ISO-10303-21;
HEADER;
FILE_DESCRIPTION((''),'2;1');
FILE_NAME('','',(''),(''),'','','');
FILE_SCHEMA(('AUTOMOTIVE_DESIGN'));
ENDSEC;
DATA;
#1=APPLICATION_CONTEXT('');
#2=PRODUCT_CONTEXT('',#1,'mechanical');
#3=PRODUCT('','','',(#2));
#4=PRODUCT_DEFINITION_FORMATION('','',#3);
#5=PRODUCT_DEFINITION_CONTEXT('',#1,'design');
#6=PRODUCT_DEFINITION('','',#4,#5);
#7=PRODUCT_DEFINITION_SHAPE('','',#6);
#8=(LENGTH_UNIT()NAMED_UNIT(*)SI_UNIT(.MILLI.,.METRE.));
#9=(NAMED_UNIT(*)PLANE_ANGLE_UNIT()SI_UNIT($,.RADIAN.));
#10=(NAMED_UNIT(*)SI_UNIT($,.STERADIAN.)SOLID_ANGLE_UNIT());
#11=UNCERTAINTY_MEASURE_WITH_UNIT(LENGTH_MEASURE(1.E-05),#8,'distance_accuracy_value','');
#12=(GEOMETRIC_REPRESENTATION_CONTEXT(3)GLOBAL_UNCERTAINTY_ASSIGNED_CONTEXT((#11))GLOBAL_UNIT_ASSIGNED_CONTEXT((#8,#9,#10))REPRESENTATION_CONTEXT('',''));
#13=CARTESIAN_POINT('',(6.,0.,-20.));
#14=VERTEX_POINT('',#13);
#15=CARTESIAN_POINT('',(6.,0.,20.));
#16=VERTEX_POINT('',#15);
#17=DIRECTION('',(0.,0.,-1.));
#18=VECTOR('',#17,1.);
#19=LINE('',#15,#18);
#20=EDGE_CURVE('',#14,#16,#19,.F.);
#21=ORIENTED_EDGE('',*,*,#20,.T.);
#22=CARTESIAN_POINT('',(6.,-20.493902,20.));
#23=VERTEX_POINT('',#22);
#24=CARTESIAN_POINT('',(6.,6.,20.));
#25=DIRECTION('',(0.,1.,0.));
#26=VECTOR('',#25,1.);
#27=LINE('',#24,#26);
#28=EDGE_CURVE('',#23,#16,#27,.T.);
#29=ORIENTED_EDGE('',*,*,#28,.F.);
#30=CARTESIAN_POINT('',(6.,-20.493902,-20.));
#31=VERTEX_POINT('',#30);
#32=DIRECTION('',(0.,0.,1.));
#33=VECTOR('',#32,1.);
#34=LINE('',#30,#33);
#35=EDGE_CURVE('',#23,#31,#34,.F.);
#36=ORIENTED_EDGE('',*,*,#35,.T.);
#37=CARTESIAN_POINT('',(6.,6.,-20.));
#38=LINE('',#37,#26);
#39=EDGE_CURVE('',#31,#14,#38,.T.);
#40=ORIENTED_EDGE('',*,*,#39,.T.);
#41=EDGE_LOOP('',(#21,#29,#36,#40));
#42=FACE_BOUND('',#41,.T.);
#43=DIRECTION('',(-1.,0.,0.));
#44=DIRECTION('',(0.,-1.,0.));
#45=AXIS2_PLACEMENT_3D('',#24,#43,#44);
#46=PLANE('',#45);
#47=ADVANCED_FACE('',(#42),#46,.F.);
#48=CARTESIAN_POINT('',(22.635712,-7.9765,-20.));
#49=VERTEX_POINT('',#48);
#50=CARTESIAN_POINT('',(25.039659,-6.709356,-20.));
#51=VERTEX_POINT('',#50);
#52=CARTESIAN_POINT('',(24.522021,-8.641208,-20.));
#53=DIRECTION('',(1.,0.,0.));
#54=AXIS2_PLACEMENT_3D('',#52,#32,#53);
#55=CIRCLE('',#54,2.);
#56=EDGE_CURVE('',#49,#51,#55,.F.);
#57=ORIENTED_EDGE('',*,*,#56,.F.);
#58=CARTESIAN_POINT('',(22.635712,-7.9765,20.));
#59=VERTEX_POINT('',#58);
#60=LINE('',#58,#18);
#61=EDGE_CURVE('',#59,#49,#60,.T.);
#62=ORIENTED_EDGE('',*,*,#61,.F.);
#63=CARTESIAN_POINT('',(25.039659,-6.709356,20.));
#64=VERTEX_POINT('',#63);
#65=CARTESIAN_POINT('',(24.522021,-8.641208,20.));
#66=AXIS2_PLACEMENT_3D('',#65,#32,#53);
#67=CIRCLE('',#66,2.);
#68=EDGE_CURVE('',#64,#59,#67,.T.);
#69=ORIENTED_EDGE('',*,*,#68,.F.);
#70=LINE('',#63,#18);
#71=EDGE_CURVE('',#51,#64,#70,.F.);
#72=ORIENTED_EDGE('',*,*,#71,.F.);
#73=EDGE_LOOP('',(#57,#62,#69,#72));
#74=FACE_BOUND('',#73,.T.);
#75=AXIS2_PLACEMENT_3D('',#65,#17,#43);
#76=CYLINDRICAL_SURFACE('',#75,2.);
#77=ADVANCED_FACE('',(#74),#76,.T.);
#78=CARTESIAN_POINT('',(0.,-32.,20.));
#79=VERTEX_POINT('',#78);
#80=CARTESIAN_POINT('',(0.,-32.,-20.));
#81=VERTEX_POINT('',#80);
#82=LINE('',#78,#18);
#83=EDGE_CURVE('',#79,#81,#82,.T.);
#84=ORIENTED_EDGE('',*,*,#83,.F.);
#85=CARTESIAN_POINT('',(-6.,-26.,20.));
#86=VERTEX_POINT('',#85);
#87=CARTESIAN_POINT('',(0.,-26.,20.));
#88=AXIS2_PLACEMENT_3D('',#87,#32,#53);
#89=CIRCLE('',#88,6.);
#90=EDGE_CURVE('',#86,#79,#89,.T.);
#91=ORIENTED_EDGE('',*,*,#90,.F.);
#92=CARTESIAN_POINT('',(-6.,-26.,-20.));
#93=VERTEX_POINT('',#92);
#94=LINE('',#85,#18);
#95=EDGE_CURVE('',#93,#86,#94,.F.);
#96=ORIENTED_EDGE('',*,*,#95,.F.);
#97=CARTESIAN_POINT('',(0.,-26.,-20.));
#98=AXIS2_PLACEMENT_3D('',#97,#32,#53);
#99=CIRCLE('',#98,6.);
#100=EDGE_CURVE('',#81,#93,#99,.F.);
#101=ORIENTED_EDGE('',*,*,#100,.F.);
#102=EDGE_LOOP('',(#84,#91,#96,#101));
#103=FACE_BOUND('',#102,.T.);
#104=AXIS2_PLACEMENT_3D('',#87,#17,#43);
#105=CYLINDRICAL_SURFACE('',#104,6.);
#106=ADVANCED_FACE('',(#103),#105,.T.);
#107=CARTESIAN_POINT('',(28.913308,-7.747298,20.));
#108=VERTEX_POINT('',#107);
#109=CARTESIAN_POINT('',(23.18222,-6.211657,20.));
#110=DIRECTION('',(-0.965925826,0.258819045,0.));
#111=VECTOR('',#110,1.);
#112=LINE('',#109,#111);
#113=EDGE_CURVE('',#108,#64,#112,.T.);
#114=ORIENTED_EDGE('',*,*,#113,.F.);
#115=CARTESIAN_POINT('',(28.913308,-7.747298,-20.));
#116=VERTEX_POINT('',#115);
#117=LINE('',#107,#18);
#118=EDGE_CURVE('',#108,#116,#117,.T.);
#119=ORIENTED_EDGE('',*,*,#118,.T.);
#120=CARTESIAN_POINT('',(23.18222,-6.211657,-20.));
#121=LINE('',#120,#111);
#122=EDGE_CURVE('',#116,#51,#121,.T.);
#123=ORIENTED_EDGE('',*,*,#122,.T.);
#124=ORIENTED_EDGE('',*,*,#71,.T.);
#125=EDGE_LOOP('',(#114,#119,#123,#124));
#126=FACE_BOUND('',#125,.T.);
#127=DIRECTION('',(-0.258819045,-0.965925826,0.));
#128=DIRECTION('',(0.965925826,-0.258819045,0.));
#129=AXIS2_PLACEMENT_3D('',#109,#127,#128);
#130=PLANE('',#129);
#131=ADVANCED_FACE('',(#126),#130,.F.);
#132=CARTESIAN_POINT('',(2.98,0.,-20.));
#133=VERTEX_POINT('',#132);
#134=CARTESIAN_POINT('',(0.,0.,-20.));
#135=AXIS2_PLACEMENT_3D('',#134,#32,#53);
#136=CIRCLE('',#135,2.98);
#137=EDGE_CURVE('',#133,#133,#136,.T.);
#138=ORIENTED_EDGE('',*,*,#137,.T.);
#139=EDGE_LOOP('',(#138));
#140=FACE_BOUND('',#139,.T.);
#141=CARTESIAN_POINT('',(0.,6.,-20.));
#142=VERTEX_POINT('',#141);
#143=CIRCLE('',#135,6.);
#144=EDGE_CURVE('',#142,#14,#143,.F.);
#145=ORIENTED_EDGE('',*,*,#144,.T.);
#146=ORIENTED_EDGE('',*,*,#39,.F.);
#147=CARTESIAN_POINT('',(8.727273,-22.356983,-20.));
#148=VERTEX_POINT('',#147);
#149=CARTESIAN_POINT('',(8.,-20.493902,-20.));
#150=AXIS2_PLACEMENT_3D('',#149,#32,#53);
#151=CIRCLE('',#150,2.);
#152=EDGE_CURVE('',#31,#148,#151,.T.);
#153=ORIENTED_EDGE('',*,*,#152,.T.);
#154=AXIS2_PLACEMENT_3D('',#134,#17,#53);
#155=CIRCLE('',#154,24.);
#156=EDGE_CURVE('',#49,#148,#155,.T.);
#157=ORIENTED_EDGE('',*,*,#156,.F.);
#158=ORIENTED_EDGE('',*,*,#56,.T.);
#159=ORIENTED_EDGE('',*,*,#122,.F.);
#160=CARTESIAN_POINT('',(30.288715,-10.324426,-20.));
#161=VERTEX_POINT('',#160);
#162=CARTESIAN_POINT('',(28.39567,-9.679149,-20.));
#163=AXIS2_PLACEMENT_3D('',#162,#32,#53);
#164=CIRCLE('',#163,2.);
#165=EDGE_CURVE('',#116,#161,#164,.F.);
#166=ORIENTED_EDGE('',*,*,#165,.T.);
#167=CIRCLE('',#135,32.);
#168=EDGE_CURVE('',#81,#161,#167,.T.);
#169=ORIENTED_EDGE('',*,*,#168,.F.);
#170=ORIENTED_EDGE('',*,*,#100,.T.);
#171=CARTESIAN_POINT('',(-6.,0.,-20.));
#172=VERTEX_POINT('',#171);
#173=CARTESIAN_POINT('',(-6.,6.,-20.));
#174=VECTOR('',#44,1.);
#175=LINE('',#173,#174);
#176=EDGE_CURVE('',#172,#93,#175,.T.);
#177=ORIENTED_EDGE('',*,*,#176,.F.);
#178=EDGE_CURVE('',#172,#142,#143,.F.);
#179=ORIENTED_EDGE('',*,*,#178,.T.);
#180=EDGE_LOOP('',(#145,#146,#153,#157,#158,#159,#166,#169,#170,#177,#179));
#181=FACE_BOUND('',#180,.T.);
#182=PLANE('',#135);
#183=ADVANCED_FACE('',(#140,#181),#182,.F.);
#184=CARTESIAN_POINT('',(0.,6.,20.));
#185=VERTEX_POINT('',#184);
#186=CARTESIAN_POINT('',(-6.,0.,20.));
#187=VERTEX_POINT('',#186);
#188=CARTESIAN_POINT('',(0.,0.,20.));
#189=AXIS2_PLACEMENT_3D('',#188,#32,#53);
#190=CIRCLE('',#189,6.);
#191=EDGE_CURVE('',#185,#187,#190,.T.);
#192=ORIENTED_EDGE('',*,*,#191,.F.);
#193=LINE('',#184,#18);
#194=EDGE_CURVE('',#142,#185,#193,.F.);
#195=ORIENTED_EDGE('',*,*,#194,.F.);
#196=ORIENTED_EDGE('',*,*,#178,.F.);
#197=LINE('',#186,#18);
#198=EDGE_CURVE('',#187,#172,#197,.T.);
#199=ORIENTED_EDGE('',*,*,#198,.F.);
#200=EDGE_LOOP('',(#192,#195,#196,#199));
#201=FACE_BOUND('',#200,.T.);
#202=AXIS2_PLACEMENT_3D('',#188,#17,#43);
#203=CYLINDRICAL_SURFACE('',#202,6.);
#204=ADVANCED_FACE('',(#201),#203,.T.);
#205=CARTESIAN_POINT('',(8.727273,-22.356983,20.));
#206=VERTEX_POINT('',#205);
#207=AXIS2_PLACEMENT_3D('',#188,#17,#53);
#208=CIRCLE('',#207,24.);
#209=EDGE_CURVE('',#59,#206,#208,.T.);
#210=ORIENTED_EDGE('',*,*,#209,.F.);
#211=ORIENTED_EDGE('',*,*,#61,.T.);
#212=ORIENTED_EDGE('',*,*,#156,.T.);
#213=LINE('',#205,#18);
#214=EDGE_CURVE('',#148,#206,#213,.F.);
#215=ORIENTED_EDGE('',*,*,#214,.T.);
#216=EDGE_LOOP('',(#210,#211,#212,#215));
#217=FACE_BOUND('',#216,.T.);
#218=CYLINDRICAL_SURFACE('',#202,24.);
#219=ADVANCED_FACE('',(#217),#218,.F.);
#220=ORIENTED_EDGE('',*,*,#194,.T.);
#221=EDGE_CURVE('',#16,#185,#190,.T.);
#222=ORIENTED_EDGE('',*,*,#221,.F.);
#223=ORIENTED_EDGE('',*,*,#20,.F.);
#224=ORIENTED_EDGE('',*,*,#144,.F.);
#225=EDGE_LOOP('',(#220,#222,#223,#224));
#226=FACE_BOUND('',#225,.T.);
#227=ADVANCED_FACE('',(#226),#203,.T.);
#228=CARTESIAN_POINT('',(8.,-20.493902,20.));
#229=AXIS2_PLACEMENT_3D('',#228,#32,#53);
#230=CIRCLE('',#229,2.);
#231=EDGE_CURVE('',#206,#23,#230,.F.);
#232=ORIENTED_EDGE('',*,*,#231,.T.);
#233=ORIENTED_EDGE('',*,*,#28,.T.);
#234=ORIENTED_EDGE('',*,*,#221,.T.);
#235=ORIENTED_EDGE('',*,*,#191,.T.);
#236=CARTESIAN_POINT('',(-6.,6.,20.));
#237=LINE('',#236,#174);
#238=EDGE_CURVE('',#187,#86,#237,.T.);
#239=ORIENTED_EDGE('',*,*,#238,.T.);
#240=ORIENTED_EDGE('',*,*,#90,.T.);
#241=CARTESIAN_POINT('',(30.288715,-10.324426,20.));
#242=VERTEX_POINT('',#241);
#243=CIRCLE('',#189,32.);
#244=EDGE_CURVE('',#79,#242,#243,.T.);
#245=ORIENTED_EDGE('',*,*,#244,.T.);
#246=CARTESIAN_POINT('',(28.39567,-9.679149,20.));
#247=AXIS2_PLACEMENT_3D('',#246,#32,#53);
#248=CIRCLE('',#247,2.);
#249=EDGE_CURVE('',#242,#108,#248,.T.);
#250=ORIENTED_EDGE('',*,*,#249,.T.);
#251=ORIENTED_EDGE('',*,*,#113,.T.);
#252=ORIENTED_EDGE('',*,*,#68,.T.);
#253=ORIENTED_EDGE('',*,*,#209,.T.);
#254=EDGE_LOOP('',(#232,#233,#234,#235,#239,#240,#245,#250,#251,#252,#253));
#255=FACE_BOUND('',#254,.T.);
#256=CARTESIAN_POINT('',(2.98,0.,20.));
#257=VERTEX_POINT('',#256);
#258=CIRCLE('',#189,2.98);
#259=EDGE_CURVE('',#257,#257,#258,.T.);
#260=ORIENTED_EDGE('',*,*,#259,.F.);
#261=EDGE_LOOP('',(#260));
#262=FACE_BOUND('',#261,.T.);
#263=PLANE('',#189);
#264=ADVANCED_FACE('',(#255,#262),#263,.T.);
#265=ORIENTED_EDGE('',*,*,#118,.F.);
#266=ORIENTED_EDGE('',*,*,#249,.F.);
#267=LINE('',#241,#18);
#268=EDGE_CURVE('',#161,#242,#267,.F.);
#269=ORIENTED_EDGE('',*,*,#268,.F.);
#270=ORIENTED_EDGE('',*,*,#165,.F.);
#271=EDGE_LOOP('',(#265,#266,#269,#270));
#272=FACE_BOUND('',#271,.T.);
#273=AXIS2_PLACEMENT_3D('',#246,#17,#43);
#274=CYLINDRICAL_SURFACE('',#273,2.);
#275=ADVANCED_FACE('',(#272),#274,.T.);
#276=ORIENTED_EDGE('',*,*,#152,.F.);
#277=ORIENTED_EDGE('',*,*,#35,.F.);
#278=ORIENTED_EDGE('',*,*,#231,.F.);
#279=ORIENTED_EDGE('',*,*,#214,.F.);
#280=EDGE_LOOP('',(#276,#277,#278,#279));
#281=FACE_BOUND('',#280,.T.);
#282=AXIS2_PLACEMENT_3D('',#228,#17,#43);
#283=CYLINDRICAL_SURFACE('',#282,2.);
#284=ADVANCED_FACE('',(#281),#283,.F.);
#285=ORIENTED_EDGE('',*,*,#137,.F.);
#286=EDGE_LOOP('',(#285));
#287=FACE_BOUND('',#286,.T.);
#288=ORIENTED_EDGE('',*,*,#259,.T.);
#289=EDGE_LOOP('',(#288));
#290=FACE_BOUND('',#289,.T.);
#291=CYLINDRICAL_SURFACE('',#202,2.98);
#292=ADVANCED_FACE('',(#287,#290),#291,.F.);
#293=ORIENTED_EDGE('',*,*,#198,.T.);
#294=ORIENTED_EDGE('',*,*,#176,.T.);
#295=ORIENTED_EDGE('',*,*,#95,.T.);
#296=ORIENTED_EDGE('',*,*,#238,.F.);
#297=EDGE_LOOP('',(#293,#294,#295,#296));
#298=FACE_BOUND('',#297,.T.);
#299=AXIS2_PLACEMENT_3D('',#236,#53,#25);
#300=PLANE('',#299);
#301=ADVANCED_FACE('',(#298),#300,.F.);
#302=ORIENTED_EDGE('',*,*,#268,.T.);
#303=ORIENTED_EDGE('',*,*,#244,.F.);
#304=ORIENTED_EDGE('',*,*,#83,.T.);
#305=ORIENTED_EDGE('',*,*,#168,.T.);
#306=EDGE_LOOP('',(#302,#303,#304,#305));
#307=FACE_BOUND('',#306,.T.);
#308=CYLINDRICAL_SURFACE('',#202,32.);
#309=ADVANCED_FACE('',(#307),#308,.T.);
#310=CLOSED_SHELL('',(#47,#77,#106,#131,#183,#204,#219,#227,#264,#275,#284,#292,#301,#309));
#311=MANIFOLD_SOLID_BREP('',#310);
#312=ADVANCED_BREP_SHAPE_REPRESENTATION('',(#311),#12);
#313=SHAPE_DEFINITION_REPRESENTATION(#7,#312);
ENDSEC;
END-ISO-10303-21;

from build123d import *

# Parameters (mm, degrees)
SKETCH2_R           = 2.98
BOSS_EXTRUDE1_DEPTH = 20
FILLET1_R           = 6
FILLET2_R           = 2


with BuildPart() as part:
    # Sketch2 → Boss-Extrude1 (new, symmetric)
    with BuildSketch(Plane.XY):
        with BuildLine():
            Line((-6, 6), (6, 6))
            Line((6, 6), (6, -23.237900077))
            ThreePointArc((6, -23.237900077), (16.893008204, -17.047764481), (23.182219831, -6.211657082))
            Line((23.182219831, -6.211657082), (30.909626441, -8.282209443))
            ThreePointArc((30.909626441, -8.282209443), (19.480365728, -25.387306889), (0, -32))
            Line((0, -32), (-6, -32))
            Line((-6, -32), (-6, 6))
        make_face()
        Circle(SKETCH2_R, mode=Mode.SUBTRACT)
    extrude(amount=BOSS_EXTRUDE1_DEPTH, both=True)

    # Fillet1
    fillet1_edges = [part.edges().sort_by_distance(p)[0] for p in [
        (6, 6, 0),
        (-6, 6, 0),
        (-6, -32, 0),
    ]]
    fillet(fillet1_edges, radius=FILLET1_R - 0.0001)  # a hair under: the kernel refuses the full size

    # Fillet2
    fillet2_edges = [part.edges().sort_by_distance(p)[0] for p in [
        (6, -23.237900077, 0),
        (23.182219831, -6.211657082, 0),
        (30.909626441, -8.282209443, 0),
    ]]
    fillet(fillet2_edges, radius=FILLET2_R)


solid = part.part
